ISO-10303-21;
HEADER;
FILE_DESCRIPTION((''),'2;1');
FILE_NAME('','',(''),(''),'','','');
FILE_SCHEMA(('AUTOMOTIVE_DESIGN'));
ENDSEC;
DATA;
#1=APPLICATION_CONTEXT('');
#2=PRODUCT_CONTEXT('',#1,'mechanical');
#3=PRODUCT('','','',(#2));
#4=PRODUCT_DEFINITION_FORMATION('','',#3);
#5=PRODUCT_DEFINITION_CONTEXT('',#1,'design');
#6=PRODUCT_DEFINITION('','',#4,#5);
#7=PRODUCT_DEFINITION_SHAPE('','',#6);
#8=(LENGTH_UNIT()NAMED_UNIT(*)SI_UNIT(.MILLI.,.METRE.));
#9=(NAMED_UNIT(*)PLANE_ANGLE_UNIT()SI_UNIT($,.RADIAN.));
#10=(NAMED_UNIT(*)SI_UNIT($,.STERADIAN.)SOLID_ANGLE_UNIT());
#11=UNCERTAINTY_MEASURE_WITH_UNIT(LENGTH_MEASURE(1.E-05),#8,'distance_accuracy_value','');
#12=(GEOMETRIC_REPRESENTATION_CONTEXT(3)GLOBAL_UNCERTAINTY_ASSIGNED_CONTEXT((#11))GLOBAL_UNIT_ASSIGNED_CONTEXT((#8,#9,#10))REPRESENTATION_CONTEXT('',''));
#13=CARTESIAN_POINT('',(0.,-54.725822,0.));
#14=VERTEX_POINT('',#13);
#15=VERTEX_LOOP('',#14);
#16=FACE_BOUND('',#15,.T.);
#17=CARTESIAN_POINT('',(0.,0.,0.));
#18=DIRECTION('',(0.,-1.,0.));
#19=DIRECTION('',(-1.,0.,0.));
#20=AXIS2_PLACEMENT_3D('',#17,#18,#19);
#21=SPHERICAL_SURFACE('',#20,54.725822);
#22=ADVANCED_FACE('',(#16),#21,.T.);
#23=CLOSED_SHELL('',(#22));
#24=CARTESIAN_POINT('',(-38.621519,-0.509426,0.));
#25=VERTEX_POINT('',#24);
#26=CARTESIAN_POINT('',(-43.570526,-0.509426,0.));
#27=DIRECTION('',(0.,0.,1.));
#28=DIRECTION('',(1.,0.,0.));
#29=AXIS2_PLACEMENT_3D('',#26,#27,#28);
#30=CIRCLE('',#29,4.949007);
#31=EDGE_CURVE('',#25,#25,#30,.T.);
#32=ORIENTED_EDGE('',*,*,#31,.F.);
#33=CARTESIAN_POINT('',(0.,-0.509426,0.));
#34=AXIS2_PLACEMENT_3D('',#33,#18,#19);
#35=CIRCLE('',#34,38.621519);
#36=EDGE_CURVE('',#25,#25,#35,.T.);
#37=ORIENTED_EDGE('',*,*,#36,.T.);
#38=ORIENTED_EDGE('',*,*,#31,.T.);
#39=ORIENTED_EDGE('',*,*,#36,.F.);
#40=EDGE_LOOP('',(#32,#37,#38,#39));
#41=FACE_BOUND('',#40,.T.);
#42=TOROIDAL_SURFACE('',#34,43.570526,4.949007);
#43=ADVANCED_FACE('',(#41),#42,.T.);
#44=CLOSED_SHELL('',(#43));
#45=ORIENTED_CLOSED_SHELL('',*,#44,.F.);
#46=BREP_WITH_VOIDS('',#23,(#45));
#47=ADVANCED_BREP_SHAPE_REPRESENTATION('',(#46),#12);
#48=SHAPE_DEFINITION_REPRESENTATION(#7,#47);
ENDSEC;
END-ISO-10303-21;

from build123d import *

# Parameters (mm, degrees)
F0_R = 4.9490069848


# Not quite as in the source:
# - the program builds the solid bodies; features that only make, move or delete a surface that nothing else refers to are left out


with BuildPart() as f1:
    # F0 (on Top) → F1 (revolve)
    with BuildSketch(Plane.XY):
        with BuildLine():
            Line((0, -32.6587968732), (0, 32.6587968732))
            ThreePointArc((0, 32.6587968732), (-32.6587968732, 0), (0, -32.6587968732))
        make_face()
        with BuildLine():
            Line((0, 32.6587968732), (0, 54.7258222024))
            ThreePointArc((0, 54.7258222024), (-54.7258222024, 0), (0, -54.7258222024))
            Line((0, -54.7258222024), (0, -32.6587968732))
            ThreePointArc((0, -32.6587968732), (-32.6587968732, 0), (0, 32.6587968732))
        make_face()
        with Locations((-43.5705259442, -0.5094259977)):
            Circle(F0_R, mode=Mode.SUBTRACT)
    revolve(axis=Axis((0, 0, 0), (0, -1, 0)))


solid = f1.part
